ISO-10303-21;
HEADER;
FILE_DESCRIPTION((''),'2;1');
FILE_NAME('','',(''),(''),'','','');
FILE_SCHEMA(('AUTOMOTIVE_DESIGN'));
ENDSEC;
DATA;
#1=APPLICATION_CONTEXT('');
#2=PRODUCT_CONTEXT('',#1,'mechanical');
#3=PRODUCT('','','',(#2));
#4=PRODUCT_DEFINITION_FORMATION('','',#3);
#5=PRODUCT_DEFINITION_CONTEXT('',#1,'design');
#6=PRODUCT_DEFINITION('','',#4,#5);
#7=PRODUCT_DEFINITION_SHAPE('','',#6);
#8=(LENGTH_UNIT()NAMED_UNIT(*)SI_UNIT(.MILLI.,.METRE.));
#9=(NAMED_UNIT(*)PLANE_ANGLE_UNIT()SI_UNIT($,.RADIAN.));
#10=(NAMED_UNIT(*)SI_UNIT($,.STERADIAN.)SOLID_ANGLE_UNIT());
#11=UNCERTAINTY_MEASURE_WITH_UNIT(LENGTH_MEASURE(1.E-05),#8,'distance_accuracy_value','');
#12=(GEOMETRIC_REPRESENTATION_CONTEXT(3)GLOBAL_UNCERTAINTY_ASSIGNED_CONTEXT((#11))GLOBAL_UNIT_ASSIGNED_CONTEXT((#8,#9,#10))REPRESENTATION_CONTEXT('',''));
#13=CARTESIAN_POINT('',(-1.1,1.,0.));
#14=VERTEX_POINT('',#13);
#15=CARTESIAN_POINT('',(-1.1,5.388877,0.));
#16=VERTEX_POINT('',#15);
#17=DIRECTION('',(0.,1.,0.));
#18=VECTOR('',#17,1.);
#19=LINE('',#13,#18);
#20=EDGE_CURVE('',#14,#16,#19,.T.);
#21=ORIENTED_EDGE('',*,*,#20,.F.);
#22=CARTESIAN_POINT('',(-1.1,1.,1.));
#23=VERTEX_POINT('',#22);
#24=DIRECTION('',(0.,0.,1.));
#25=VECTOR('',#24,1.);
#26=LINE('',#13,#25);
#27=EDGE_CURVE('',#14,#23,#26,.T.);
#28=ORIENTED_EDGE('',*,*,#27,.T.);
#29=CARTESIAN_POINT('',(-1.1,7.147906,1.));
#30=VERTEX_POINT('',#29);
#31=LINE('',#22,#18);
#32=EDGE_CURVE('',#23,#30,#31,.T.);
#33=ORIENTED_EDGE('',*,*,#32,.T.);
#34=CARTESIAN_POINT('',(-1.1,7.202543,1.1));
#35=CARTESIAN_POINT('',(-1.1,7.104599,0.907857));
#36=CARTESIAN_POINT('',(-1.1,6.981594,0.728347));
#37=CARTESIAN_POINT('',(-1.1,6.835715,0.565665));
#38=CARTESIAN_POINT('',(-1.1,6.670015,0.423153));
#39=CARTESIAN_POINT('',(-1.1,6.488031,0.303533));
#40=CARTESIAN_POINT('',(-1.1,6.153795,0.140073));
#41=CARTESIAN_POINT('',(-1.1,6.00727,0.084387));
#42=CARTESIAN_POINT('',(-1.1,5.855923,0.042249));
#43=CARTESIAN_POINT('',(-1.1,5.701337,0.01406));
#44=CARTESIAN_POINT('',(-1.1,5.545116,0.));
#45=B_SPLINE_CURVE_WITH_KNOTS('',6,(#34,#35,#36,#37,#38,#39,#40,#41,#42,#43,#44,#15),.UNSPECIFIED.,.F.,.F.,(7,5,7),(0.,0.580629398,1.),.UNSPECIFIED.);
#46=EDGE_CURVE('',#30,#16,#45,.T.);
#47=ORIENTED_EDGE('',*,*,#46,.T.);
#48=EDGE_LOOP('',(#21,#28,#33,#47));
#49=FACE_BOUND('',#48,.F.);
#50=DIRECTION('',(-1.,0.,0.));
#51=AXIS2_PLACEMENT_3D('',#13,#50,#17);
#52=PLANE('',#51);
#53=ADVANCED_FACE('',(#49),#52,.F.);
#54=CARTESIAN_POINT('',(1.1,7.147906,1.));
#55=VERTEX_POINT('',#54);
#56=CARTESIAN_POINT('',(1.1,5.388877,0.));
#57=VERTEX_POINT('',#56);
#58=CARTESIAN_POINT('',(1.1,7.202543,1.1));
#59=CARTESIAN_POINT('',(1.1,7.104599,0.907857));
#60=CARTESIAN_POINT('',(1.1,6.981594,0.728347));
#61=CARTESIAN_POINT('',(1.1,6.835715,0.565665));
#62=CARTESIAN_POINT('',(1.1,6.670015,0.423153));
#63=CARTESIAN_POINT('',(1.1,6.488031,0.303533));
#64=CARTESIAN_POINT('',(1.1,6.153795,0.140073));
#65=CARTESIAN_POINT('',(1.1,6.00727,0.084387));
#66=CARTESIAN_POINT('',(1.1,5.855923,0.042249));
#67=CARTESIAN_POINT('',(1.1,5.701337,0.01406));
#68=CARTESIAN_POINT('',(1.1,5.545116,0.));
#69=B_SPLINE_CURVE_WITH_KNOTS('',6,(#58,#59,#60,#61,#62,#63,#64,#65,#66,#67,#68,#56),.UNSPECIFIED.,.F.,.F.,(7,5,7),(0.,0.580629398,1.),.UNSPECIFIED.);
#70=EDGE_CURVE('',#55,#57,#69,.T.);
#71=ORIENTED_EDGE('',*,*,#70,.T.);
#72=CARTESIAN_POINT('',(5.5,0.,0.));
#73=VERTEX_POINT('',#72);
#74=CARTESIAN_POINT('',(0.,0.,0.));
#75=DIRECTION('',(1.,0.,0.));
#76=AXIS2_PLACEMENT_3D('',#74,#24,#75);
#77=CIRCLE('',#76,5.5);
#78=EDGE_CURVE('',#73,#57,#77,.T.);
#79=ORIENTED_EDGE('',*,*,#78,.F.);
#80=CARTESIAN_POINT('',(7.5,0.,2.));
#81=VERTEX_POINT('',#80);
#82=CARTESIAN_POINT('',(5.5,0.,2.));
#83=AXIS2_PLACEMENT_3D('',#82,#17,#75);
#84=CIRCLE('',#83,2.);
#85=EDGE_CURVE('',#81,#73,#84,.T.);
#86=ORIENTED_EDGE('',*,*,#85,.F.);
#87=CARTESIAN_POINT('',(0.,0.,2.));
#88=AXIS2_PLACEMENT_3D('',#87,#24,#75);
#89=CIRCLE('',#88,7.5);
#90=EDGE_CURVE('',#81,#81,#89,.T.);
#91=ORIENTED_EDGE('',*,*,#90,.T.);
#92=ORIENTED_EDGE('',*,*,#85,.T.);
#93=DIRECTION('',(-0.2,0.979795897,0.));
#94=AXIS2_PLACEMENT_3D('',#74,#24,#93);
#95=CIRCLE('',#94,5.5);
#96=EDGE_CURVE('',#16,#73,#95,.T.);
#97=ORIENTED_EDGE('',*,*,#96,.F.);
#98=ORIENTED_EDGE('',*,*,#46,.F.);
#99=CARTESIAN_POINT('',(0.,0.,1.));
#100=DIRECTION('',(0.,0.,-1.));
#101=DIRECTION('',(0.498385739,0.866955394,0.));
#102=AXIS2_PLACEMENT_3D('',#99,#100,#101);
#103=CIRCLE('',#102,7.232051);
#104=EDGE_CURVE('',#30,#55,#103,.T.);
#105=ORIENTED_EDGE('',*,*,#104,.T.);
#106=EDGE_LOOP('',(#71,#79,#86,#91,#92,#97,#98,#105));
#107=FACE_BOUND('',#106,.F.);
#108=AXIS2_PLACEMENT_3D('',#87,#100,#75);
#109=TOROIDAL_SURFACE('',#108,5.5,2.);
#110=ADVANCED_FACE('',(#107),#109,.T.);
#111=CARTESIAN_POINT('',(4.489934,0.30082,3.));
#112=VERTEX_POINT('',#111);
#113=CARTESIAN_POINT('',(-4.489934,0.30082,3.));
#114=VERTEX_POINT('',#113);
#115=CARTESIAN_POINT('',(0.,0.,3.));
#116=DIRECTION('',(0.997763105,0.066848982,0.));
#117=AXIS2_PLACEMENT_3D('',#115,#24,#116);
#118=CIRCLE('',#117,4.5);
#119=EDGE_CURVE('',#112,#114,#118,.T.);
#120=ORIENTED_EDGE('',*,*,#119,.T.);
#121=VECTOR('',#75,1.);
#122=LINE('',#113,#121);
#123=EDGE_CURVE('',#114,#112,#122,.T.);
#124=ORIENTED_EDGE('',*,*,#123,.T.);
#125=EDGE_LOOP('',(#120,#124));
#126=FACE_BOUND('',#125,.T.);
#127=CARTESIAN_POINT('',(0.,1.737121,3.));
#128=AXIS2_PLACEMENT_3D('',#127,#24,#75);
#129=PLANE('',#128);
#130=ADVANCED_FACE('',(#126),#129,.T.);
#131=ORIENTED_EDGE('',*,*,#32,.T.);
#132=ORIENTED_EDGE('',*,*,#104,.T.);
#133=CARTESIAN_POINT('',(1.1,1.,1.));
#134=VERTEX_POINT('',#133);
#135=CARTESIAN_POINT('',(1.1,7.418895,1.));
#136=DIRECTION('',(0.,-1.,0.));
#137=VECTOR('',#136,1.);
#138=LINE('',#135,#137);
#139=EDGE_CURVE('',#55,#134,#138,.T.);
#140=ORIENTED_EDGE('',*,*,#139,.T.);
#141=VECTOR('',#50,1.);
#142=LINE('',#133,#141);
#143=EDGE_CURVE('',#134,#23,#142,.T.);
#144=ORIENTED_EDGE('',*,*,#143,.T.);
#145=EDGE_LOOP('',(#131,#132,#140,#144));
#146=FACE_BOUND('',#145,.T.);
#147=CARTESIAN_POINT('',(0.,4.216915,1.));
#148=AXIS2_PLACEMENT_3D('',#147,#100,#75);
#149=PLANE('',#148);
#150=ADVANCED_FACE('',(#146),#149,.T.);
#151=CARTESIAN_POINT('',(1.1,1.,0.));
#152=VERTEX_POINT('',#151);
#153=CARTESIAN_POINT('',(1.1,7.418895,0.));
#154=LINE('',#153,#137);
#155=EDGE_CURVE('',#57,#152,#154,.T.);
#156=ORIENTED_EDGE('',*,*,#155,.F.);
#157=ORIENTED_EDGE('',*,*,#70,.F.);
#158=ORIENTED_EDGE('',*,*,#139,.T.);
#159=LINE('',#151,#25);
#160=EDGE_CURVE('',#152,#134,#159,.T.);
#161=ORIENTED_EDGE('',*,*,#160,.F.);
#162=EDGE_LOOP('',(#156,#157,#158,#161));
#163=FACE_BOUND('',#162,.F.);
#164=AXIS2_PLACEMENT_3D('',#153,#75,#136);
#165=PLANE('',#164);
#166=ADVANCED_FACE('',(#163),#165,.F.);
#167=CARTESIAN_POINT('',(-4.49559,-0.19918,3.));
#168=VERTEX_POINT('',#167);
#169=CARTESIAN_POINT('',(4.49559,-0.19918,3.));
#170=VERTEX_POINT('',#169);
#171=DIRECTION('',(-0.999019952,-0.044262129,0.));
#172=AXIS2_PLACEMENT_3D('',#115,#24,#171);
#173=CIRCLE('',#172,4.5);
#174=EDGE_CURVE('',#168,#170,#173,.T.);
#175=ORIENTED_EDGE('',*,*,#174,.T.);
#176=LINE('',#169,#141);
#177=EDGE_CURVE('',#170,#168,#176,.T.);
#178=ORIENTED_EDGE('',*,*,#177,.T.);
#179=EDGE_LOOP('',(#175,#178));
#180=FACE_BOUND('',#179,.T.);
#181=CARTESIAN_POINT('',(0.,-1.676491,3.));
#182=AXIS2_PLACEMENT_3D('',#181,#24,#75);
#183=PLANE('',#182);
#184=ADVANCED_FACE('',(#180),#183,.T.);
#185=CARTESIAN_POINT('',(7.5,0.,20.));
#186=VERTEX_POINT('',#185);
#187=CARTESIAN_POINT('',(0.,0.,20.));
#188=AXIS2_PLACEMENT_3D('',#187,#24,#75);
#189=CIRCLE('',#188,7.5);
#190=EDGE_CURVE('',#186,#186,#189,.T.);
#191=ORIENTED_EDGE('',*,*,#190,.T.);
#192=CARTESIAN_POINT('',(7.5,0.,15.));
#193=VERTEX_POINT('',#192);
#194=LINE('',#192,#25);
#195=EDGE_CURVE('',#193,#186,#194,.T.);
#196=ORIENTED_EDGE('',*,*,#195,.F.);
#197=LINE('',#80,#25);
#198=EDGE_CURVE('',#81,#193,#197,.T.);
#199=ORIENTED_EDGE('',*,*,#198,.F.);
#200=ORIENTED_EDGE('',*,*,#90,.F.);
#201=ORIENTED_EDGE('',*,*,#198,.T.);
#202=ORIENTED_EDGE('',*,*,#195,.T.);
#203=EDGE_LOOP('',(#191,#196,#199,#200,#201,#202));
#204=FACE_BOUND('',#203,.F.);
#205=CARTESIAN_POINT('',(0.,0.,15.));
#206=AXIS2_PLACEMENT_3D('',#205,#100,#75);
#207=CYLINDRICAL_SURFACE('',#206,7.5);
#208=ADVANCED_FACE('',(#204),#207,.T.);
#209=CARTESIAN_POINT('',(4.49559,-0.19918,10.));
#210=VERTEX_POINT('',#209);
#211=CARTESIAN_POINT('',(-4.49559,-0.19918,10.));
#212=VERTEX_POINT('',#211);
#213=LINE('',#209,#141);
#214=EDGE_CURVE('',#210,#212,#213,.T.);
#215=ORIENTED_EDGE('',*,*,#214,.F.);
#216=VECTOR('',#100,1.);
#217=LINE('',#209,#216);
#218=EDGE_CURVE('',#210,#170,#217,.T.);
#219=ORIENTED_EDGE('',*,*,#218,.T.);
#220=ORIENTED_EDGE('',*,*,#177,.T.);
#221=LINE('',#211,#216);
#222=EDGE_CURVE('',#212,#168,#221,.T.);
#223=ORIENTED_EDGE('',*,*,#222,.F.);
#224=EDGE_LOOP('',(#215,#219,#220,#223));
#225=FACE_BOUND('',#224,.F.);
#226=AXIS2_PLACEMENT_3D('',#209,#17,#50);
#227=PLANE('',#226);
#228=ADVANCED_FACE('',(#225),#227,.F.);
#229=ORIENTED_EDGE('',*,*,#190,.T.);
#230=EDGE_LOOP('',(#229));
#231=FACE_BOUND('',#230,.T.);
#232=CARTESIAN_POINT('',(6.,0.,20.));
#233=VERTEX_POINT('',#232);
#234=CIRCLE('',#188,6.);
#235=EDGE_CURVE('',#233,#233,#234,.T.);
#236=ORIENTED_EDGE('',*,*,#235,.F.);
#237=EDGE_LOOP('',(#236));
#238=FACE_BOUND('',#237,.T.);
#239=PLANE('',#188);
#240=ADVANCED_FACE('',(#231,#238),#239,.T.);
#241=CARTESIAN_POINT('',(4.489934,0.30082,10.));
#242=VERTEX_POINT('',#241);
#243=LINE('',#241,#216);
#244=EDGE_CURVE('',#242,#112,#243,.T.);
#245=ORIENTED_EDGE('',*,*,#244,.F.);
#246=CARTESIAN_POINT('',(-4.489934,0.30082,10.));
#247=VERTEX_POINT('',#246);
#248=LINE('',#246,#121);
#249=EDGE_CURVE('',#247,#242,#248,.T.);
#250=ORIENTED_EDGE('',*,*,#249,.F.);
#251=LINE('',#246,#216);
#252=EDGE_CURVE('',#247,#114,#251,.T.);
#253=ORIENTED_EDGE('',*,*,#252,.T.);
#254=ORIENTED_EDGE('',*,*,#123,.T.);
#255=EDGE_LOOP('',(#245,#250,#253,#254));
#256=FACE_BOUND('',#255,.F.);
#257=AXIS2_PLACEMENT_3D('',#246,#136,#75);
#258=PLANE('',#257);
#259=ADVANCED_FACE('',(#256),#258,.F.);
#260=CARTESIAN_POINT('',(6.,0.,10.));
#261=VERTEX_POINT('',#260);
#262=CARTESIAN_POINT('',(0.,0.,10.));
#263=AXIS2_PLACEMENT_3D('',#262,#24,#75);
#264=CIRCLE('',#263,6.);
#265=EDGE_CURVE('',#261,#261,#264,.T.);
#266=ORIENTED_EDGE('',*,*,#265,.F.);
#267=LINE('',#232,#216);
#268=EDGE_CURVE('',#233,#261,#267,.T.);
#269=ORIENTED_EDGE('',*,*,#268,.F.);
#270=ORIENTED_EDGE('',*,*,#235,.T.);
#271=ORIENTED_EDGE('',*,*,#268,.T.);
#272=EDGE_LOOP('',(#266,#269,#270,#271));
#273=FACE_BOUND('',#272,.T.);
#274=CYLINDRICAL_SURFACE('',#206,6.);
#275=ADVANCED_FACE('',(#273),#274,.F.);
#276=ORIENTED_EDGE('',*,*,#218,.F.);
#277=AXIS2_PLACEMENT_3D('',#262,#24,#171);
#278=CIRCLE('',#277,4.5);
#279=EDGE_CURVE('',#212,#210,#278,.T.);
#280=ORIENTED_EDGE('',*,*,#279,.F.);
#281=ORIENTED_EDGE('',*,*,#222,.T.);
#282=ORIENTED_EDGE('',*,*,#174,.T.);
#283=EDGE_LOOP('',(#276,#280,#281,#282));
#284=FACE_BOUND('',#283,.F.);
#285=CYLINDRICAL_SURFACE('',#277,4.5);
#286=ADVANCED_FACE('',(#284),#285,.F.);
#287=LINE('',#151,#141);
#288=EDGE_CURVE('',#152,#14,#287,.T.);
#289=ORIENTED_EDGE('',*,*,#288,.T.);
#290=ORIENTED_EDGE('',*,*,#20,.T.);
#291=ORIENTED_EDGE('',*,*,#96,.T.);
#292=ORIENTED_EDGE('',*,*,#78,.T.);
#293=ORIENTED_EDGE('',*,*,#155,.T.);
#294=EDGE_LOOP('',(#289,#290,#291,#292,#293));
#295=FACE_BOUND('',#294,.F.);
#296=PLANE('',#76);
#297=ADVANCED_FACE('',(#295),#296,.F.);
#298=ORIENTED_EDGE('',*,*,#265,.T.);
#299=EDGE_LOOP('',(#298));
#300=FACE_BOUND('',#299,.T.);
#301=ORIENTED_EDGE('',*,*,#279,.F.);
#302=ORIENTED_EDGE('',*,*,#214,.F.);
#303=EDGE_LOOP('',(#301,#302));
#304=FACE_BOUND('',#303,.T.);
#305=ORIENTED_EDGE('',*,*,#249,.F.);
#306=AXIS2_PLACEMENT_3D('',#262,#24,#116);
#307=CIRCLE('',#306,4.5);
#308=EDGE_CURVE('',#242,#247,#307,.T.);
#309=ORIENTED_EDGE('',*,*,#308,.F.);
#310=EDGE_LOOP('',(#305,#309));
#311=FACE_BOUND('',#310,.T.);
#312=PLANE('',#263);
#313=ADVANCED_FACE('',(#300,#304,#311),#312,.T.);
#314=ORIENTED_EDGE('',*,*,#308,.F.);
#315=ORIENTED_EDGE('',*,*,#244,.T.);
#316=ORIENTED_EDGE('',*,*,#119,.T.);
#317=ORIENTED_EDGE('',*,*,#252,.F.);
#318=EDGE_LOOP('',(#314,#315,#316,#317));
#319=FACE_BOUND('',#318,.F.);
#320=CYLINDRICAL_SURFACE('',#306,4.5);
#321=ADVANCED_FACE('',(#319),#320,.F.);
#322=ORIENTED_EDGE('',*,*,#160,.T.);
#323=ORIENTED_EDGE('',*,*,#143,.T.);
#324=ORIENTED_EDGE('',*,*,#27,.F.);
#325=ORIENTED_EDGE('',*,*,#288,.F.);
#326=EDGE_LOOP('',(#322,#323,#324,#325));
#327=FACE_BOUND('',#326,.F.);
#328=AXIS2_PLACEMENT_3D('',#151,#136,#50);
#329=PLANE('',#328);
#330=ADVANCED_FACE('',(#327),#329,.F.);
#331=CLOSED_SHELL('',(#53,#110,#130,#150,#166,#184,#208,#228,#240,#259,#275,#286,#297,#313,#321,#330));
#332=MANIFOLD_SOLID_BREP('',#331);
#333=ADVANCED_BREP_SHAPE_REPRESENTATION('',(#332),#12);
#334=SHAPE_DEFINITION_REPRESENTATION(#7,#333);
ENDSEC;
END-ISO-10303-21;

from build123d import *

# Parameters (mm, degrees)
F0_R        = 7.5
F1_DEPTH    = 10
F3_DEPTH    = 7
F5_DEPTH    = 1
F6_T2_ANGLE = 299.893258673
F6_T4_ANGLE = 119.7759847122
F2_R        = 7.5
F2_R_2      = 6
F7_DEPTH    = 5
F8_DEPTH    = 5


# Not quite as in the source:
# - a fillet or chamfer that OpenCascade refuses, or shapes differently, is made with other operations: its cross-section is extruded or revolved along the edge and cut away or added


with BuildPart() as f1:
    # F0 (on Top) → F1 (new body)
    with BuildSketch(Plane.XY):
        Circle(F0_R)
    extrude(amount=F1_DEPTH)

    # F2 (on face) → F3 (cut)
    with BuildSketch(Plane.XY.offset(10)):
        with BuildLine():
            Line((-4.4899339722, 0.3008204206), (4.4899339722, 0.3008204206))
            ThreePointArc((4.4899339722, 0.3008204206), (0, 4.5), (-4.4899339722, 0.3008204206))
        make_face()
        with BuildLine():
            ThreePointArc((-4.4955897828, -0.1991795794), (0, -4.5), (4.4955897828, -0.1991795794))
            Line((4.4955897828, -0.1991795794), (-4.4955897828, -0.1991795794))
        make_face()
    extrude(amount=-F3_DEPTH, mode=Mode.SUBTRACT)

    # F4 (on face) → F5 (cut)
    with BuildSketch(Plane(origin=(0, 0, 0), x_dir=(1, 0, 0), z_dir=(0, 0, -1))):
        with BuildLine():
            Line((-1.1, -1), (-1.1, -7.4188947964))
            ThreePointArc((-1.1, -7.4188947964), (0, -7.5), (1.1, -7.4188947964))
            Line((1.1, -7.4188947964), (1.1, -1))
            Line((1.1, -1), (0, -1))
            Line((0, -1), (-1.1, -1))
        make_face()
    extrude(amount=-F5_DEPTH, mode=Mode.SUBTRACT)

    # F6: fillet of radius 2 on 1 edges, made by hand

    # F6_s1 → F6_t2 (revolve, cut)
    with BuildSketch(Plane(origin=(0, 0, 0), x_dir=(0, 0, 1), z_dir=(0.8669553942, -0.4983857387, 0))):
        with BuildLine():
            ThreePointArc((2, -7.5), (0.5857864376, -6.9142135624), (0, -5.5))
            Line((0, -5.5), (0, -7.5))
            Line((0, -7.5), (2, -7.5))
        make_face()
    revolve(axis=Axis((0, 0, 0), (0, 0, 1)), revolution_arc=F6_T2_ANGLE, mode=Mode.SUBTRACT)

    # F6_s3 → F6_t4 (revolve, cut)
    with BuildSketch(Plane.XZ):
        with BuildLine():
            ThreePointArc((7.5, 2), (6.9142135624, 0.5857864376), (5.5, 0))
            Line((5.5, 0), (7.5, 0))
            Line((7.5, 0), (7.5, 2))
        make_face()
    revolve(axis=Axis((0, 0, 0), (0, 0, 1)), revolution_arc=F6_T4_ANGLE, mode=Mode.SUBTRACT)

    # F2 (on face) → F7 (join)
    with BuildSketch(Plane.XY.offset(10)):
        Circle(F2_R)
        Circle(F2_R_2, mode=Mode.SUBTRACT)
    extrude(amount=F7_DEPTH)

    # F8 (add): a face of the model
    f8_faces = [f1.faces().sort_by_distance(p)[0] for p in [
        (-7.2878679656, 0, 15),
    ]]
    extrude(f8_faces, amount=F8_DEPTH)


solid = f1.part
